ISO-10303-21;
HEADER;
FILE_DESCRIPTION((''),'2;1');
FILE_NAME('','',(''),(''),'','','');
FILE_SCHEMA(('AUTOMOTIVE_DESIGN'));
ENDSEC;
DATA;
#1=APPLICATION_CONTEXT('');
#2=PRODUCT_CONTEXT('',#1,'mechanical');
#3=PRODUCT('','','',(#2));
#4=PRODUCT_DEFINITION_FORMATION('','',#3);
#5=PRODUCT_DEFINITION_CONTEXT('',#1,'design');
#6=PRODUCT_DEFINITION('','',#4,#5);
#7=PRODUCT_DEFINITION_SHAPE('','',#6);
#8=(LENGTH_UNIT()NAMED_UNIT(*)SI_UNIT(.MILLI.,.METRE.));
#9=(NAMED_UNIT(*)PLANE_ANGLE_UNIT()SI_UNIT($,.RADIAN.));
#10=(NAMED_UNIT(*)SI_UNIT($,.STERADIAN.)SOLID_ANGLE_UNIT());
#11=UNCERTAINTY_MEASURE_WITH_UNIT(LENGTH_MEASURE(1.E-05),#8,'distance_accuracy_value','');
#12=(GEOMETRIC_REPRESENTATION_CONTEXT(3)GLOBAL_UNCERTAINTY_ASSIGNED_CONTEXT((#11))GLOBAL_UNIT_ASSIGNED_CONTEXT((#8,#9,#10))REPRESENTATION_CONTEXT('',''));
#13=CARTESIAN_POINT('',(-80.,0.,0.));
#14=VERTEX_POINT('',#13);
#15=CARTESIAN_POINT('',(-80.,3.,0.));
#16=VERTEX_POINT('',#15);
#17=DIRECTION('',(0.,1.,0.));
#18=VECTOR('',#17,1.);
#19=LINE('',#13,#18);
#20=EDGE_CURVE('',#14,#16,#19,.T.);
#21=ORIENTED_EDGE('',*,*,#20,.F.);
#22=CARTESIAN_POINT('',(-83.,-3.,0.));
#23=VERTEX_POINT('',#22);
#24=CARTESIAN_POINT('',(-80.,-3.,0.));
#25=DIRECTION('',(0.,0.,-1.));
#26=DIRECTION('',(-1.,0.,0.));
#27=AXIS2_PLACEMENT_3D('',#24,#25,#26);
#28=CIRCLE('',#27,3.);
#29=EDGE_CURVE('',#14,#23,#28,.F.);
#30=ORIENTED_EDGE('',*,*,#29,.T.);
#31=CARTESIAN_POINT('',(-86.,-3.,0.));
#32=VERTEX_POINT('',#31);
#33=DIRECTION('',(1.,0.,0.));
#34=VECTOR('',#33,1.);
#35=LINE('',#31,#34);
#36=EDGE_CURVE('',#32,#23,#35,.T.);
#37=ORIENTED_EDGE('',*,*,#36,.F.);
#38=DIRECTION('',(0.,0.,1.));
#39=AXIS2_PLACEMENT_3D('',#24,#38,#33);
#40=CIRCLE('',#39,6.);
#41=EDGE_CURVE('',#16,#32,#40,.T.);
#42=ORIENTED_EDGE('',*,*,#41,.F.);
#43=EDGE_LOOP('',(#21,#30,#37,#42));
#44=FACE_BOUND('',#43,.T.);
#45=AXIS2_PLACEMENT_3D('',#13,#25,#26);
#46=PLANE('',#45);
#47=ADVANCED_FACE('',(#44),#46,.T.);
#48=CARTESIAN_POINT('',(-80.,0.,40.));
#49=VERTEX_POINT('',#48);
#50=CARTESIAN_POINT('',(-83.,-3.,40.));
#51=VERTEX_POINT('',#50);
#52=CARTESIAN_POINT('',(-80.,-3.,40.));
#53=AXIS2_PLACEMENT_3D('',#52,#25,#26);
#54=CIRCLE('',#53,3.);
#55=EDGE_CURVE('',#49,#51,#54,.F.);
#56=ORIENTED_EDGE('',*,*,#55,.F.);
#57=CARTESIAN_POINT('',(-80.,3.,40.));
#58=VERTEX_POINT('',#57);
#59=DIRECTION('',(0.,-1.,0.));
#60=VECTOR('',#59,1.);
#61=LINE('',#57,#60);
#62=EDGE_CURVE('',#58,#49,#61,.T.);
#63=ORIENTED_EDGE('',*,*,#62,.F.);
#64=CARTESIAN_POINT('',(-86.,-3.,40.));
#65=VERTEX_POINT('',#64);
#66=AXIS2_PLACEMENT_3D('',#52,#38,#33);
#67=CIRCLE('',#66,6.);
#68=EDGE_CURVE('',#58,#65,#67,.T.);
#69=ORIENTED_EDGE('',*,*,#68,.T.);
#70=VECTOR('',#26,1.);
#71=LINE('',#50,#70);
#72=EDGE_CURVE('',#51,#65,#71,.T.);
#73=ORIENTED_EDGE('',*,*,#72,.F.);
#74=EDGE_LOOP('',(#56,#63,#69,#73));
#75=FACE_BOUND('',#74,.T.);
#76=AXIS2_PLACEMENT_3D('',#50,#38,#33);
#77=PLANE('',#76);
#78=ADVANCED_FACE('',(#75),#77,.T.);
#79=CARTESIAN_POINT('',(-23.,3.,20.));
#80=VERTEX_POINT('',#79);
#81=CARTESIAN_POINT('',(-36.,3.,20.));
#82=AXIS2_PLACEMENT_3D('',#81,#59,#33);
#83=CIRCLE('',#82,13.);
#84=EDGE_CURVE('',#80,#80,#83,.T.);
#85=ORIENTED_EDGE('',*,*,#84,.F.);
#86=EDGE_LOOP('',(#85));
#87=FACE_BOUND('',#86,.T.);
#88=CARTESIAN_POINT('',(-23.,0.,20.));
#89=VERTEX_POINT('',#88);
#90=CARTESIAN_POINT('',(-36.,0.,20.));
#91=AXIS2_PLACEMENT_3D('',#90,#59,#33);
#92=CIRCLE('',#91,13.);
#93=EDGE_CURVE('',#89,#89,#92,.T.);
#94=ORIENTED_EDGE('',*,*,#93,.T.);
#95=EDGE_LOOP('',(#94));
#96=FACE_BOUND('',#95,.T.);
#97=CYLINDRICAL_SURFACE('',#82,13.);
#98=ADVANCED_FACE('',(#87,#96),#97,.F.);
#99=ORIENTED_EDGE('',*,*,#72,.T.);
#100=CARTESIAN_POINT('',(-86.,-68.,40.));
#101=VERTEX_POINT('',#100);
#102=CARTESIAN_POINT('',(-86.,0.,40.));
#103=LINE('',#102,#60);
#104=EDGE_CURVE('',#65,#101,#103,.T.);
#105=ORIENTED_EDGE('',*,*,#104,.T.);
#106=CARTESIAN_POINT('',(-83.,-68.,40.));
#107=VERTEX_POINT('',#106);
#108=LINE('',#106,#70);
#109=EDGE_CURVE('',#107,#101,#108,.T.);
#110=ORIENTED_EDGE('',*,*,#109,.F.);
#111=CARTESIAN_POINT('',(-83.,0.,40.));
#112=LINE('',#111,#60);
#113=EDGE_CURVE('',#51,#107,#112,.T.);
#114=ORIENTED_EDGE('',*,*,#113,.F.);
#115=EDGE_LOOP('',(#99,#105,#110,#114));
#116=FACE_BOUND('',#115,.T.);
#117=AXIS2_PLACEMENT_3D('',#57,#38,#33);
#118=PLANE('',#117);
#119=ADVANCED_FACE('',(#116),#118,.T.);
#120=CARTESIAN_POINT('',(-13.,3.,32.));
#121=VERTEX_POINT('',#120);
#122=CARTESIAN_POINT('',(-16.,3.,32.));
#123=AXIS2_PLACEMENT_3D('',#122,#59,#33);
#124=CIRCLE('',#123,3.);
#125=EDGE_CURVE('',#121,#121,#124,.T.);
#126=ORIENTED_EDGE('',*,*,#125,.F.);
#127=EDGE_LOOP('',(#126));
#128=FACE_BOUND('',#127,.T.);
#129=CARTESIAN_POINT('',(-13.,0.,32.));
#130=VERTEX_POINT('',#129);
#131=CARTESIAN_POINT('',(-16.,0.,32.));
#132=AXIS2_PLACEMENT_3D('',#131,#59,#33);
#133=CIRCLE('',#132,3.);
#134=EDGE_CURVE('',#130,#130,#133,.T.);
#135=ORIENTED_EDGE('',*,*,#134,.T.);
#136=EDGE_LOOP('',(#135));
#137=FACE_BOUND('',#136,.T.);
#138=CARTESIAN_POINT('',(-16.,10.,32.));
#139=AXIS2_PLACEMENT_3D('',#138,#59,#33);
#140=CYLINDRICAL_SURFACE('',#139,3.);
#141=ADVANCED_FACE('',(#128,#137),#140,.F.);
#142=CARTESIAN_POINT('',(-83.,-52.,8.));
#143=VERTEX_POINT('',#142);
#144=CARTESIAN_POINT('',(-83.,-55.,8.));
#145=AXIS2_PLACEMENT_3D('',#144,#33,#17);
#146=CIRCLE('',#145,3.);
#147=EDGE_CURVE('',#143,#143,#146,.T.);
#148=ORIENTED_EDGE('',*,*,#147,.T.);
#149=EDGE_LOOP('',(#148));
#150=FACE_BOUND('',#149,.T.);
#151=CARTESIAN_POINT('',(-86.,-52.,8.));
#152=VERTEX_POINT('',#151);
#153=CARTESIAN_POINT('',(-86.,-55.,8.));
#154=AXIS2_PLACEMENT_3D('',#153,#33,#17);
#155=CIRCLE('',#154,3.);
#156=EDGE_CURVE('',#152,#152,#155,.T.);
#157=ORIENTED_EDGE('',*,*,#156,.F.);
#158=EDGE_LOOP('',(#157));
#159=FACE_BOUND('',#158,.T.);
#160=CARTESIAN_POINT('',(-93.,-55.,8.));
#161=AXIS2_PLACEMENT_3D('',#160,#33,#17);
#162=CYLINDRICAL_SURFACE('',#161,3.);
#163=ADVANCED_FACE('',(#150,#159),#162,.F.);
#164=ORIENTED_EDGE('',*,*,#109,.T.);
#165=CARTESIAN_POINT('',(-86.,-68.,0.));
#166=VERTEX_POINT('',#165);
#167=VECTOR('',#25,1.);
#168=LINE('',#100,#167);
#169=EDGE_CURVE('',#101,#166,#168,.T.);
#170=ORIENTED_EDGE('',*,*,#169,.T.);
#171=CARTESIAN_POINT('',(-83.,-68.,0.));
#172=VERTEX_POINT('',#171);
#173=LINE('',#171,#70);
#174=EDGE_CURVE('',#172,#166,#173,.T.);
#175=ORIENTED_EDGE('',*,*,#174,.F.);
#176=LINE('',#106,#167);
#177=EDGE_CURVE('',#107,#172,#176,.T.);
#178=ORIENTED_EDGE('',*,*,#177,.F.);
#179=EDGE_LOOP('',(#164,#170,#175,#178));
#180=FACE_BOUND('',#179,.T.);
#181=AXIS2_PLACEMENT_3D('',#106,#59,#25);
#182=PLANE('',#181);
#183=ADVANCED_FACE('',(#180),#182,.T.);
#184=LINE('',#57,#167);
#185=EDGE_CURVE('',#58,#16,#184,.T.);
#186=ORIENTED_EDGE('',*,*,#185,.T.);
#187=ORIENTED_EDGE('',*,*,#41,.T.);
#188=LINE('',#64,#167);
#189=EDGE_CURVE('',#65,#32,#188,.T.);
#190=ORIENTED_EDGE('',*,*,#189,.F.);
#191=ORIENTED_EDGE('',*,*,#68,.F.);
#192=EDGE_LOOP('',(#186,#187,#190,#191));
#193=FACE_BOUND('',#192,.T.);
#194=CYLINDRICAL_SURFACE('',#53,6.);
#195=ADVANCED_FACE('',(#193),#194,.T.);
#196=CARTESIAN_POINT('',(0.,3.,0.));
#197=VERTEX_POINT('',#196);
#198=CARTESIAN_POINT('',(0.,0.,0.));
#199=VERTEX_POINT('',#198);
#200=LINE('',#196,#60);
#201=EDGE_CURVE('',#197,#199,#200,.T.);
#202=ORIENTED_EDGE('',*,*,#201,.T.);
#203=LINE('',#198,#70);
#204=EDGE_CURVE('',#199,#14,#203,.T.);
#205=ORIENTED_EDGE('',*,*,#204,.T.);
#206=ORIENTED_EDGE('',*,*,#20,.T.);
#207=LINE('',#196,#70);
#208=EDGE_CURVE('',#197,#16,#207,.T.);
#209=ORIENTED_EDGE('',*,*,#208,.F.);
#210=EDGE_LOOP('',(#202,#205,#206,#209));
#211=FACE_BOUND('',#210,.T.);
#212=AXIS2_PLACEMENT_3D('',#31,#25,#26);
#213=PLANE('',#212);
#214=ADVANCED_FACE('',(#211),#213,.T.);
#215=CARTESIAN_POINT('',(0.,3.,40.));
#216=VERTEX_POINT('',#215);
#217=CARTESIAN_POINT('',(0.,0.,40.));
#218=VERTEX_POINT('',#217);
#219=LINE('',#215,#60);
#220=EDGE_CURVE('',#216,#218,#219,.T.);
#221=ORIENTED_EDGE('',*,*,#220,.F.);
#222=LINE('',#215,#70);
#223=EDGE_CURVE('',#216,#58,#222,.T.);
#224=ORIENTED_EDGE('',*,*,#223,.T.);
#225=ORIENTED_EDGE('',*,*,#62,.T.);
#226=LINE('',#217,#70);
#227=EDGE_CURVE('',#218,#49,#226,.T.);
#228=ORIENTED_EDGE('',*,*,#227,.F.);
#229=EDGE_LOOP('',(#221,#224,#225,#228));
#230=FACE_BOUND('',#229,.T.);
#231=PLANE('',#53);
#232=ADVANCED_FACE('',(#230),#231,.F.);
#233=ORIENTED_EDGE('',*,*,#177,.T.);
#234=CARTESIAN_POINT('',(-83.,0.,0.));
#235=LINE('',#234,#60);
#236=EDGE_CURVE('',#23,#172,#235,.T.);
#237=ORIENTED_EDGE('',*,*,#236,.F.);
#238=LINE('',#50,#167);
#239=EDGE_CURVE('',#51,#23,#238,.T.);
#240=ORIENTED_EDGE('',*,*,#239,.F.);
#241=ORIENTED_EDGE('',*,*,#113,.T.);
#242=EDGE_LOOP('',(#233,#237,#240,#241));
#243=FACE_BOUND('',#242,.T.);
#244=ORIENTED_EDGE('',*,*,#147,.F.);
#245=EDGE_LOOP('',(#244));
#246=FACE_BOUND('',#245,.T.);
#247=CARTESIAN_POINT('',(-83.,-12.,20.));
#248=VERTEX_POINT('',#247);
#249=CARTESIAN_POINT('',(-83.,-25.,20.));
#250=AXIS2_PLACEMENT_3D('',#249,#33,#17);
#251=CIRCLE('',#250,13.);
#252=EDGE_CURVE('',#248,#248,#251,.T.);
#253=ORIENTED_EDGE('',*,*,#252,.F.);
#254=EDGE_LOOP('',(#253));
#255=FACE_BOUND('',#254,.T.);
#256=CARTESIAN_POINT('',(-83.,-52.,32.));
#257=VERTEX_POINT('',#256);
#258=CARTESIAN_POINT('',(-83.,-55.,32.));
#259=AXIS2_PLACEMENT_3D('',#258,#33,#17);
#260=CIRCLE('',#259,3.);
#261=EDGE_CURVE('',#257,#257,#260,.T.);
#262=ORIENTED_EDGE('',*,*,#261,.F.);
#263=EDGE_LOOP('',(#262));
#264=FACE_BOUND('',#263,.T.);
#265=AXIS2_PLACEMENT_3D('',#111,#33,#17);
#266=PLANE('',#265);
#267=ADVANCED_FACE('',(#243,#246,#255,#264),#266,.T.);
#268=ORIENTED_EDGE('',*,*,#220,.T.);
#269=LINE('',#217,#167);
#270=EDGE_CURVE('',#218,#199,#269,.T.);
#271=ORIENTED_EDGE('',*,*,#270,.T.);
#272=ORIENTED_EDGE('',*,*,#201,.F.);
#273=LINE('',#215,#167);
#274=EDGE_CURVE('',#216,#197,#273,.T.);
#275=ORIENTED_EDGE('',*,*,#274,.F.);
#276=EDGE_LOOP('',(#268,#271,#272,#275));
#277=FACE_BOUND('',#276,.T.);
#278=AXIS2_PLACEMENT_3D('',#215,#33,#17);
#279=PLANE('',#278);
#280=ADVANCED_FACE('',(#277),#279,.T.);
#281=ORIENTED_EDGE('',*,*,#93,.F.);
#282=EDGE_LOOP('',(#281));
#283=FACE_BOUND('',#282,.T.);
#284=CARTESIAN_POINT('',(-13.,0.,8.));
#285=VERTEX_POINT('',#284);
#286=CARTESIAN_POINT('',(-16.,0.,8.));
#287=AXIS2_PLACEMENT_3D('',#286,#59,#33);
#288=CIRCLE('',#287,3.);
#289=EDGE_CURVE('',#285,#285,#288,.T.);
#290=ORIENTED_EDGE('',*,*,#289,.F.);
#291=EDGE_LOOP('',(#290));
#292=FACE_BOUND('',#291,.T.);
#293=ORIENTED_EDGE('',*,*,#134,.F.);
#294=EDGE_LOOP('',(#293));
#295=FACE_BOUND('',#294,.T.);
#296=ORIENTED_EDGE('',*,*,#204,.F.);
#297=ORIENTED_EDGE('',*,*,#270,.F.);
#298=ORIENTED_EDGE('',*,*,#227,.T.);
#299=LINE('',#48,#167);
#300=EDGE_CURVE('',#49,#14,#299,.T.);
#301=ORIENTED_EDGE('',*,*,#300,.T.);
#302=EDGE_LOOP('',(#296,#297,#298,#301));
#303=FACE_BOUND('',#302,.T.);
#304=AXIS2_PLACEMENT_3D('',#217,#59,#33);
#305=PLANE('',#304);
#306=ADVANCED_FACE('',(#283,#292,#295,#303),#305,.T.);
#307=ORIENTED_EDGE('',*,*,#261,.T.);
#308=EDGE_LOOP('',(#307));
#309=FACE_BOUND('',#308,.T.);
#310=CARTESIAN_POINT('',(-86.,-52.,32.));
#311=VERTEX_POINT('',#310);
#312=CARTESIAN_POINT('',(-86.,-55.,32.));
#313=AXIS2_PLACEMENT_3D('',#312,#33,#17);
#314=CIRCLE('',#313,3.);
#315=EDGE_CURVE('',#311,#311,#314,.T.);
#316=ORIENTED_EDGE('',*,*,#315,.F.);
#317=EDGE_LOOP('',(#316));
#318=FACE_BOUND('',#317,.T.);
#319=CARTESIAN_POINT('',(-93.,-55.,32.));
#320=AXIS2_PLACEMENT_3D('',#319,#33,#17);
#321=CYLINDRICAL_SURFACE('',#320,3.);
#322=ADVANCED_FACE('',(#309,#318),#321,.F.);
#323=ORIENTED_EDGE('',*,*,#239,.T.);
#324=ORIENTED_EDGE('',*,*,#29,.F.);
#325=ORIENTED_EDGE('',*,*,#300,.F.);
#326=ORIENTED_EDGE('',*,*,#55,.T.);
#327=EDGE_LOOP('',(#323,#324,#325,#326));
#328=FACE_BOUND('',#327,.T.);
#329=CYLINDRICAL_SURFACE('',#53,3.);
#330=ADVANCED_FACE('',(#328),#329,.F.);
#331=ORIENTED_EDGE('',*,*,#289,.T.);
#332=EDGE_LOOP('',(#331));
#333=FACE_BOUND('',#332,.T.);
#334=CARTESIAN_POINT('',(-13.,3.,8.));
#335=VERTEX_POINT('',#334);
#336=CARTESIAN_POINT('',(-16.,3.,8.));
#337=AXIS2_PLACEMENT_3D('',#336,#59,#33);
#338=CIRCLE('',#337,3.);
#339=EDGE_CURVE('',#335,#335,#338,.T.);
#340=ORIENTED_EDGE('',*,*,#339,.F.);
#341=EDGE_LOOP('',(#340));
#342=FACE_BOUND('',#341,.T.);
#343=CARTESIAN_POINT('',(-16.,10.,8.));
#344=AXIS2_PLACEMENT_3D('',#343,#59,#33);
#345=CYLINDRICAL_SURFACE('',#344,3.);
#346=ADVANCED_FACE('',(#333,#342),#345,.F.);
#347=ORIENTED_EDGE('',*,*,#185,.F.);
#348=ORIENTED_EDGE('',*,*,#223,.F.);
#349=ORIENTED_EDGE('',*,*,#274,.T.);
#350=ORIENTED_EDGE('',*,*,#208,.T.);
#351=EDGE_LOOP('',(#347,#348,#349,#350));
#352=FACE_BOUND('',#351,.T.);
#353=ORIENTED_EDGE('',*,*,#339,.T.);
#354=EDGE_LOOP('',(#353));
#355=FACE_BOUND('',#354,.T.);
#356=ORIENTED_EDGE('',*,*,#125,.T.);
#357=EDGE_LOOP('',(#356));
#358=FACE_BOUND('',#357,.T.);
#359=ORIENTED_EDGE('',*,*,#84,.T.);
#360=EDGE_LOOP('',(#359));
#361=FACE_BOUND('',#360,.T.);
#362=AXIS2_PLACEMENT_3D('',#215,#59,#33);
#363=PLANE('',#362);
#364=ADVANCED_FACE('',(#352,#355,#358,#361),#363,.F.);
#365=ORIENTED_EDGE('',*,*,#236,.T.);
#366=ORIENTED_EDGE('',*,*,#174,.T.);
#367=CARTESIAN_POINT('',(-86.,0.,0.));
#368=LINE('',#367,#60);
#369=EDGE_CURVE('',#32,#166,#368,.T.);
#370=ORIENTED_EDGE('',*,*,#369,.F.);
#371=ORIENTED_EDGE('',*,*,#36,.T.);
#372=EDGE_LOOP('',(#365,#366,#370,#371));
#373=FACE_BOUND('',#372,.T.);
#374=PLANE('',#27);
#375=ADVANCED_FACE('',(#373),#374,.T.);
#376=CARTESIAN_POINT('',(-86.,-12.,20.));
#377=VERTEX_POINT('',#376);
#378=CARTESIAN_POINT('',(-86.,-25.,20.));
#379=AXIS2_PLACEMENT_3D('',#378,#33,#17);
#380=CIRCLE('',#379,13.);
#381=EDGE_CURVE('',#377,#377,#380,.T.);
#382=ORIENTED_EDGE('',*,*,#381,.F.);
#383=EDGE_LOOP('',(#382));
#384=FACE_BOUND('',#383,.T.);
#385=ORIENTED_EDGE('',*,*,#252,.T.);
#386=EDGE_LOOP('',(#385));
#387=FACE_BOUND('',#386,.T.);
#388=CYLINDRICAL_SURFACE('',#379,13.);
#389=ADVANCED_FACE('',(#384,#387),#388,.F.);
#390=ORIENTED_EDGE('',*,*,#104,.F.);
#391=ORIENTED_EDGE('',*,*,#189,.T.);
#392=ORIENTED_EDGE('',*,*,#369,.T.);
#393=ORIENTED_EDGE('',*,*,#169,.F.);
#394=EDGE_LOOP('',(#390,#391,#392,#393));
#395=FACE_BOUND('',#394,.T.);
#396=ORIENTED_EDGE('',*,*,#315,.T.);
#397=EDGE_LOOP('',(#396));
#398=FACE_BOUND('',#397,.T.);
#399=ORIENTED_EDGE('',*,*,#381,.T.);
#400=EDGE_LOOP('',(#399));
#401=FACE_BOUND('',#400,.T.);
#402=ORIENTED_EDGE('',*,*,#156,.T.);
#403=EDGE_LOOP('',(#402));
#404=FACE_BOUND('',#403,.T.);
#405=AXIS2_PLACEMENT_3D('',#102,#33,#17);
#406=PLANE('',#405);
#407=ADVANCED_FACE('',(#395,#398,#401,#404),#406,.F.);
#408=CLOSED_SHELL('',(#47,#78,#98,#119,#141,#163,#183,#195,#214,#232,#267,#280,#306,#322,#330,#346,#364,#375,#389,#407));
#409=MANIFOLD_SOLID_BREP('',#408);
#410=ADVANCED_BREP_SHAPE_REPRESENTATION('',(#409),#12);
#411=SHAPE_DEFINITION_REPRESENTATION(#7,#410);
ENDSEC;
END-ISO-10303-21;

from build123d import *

# Parameters (mm, degrees)
BASE_FLANGE1_DEPTH = 40
SKETCH2_R          = 13
CUT_EXTRUDE1_DEPTH = 115.512008104
SKETCH3_R          = 13
CUT_EXTRUDE2_DEPTH = 117.704755687
SKETCH4_R          = 3
CUT_EXTRUDE3_DEPTH = 10
SKETCH5_R          = 3
CUT_EXTRUDE4_DEPTH = 10


# Sheet-metal steps are written as plain solids
with BuildPart() as part:
    # Sketch1 → Base-Flange1 (new body)
    with BuildSketch(Plane.XY):
        with BuildLine():
            Line((0, 0), (-80, 0))
            ThreePointArc((-80, 0), (-82.121320344, -0.878679656), (-83, -3))
            Line((-83, -3), (-83, -68))
            Line((-83, -68), (-86, -68))
            Line((-86, -68), (-86, -3))
            ThreePointArc((-86, -3), (-84.242640687, 1.242640687), (-80, 3))
            Line((-80, 3), (0, 3))
            Line((0, 3), (0, 0))
        make_face()
    extrude(amount=BASE_FLANGE1_DEPTH)

    # Sketch2 → Cut-Extrude1 (cut, through all)
    with BuildSketch(Plane(origin=(-83, 0, 0), x_dir=(0, 0, -1), z_dir=(1, 0, 0))):
        with Locations(Location((-20, -25, 0), (0, 0, 90))):
            Circle(SKETCH2_R)
    extrude(amount=-CUT_EXTRUDE1_DEPTH, mode=Mode.SUBTRACT)

    # Sketch3 → Cut-Extrude2 (cut, through all)
    with BuildSketch(Plane.XZ):
        with Locations((-36, 20)):
            Circle(SKETCH3_R)
    extrude(amount=-CUT_EXTRUDE2_DEPTH, mode=Mode.SUBTRACT)

    # Sketch4 → Cut-Extrude3 (cut)
    with BuildSketch(Plane(origin=(0, 0, 0), x_dir=(-1, 0, 0), z_dir=(0, -1, 0))):
        with Locations(Location((16, -32, 0), (0, 0, 180))):
            Circle(SKETCH4_R)
        with Locations(Location((16, -8, 0), (0, 0, 180))):
            Circle(SKETCH4_R)
    extrude(amount=-CUT_EXTRUDE3_DEPTH, mode=Mode.SUBTRACT)

    # Sketch5 → Cut-Extrude4 (cut)
    with BuildSketch(Plane(origin=(-83, 0, 0), x_dir=(0, 0, -1), z_dir=(1, 0, 0))):
        with Locations(Location((-32, -55, 0), (0, 0, 90))):
            Circle(SKETCH5_R)
        with Locations(Location((-8, -55, 0), (0, 0, 90))):
            Circle(SKETCH5_R)
    extrude(amount=-CUT_EXTRUDE4_DEPTH, mode=Mode.SUBTRACT)


solid = part.part
